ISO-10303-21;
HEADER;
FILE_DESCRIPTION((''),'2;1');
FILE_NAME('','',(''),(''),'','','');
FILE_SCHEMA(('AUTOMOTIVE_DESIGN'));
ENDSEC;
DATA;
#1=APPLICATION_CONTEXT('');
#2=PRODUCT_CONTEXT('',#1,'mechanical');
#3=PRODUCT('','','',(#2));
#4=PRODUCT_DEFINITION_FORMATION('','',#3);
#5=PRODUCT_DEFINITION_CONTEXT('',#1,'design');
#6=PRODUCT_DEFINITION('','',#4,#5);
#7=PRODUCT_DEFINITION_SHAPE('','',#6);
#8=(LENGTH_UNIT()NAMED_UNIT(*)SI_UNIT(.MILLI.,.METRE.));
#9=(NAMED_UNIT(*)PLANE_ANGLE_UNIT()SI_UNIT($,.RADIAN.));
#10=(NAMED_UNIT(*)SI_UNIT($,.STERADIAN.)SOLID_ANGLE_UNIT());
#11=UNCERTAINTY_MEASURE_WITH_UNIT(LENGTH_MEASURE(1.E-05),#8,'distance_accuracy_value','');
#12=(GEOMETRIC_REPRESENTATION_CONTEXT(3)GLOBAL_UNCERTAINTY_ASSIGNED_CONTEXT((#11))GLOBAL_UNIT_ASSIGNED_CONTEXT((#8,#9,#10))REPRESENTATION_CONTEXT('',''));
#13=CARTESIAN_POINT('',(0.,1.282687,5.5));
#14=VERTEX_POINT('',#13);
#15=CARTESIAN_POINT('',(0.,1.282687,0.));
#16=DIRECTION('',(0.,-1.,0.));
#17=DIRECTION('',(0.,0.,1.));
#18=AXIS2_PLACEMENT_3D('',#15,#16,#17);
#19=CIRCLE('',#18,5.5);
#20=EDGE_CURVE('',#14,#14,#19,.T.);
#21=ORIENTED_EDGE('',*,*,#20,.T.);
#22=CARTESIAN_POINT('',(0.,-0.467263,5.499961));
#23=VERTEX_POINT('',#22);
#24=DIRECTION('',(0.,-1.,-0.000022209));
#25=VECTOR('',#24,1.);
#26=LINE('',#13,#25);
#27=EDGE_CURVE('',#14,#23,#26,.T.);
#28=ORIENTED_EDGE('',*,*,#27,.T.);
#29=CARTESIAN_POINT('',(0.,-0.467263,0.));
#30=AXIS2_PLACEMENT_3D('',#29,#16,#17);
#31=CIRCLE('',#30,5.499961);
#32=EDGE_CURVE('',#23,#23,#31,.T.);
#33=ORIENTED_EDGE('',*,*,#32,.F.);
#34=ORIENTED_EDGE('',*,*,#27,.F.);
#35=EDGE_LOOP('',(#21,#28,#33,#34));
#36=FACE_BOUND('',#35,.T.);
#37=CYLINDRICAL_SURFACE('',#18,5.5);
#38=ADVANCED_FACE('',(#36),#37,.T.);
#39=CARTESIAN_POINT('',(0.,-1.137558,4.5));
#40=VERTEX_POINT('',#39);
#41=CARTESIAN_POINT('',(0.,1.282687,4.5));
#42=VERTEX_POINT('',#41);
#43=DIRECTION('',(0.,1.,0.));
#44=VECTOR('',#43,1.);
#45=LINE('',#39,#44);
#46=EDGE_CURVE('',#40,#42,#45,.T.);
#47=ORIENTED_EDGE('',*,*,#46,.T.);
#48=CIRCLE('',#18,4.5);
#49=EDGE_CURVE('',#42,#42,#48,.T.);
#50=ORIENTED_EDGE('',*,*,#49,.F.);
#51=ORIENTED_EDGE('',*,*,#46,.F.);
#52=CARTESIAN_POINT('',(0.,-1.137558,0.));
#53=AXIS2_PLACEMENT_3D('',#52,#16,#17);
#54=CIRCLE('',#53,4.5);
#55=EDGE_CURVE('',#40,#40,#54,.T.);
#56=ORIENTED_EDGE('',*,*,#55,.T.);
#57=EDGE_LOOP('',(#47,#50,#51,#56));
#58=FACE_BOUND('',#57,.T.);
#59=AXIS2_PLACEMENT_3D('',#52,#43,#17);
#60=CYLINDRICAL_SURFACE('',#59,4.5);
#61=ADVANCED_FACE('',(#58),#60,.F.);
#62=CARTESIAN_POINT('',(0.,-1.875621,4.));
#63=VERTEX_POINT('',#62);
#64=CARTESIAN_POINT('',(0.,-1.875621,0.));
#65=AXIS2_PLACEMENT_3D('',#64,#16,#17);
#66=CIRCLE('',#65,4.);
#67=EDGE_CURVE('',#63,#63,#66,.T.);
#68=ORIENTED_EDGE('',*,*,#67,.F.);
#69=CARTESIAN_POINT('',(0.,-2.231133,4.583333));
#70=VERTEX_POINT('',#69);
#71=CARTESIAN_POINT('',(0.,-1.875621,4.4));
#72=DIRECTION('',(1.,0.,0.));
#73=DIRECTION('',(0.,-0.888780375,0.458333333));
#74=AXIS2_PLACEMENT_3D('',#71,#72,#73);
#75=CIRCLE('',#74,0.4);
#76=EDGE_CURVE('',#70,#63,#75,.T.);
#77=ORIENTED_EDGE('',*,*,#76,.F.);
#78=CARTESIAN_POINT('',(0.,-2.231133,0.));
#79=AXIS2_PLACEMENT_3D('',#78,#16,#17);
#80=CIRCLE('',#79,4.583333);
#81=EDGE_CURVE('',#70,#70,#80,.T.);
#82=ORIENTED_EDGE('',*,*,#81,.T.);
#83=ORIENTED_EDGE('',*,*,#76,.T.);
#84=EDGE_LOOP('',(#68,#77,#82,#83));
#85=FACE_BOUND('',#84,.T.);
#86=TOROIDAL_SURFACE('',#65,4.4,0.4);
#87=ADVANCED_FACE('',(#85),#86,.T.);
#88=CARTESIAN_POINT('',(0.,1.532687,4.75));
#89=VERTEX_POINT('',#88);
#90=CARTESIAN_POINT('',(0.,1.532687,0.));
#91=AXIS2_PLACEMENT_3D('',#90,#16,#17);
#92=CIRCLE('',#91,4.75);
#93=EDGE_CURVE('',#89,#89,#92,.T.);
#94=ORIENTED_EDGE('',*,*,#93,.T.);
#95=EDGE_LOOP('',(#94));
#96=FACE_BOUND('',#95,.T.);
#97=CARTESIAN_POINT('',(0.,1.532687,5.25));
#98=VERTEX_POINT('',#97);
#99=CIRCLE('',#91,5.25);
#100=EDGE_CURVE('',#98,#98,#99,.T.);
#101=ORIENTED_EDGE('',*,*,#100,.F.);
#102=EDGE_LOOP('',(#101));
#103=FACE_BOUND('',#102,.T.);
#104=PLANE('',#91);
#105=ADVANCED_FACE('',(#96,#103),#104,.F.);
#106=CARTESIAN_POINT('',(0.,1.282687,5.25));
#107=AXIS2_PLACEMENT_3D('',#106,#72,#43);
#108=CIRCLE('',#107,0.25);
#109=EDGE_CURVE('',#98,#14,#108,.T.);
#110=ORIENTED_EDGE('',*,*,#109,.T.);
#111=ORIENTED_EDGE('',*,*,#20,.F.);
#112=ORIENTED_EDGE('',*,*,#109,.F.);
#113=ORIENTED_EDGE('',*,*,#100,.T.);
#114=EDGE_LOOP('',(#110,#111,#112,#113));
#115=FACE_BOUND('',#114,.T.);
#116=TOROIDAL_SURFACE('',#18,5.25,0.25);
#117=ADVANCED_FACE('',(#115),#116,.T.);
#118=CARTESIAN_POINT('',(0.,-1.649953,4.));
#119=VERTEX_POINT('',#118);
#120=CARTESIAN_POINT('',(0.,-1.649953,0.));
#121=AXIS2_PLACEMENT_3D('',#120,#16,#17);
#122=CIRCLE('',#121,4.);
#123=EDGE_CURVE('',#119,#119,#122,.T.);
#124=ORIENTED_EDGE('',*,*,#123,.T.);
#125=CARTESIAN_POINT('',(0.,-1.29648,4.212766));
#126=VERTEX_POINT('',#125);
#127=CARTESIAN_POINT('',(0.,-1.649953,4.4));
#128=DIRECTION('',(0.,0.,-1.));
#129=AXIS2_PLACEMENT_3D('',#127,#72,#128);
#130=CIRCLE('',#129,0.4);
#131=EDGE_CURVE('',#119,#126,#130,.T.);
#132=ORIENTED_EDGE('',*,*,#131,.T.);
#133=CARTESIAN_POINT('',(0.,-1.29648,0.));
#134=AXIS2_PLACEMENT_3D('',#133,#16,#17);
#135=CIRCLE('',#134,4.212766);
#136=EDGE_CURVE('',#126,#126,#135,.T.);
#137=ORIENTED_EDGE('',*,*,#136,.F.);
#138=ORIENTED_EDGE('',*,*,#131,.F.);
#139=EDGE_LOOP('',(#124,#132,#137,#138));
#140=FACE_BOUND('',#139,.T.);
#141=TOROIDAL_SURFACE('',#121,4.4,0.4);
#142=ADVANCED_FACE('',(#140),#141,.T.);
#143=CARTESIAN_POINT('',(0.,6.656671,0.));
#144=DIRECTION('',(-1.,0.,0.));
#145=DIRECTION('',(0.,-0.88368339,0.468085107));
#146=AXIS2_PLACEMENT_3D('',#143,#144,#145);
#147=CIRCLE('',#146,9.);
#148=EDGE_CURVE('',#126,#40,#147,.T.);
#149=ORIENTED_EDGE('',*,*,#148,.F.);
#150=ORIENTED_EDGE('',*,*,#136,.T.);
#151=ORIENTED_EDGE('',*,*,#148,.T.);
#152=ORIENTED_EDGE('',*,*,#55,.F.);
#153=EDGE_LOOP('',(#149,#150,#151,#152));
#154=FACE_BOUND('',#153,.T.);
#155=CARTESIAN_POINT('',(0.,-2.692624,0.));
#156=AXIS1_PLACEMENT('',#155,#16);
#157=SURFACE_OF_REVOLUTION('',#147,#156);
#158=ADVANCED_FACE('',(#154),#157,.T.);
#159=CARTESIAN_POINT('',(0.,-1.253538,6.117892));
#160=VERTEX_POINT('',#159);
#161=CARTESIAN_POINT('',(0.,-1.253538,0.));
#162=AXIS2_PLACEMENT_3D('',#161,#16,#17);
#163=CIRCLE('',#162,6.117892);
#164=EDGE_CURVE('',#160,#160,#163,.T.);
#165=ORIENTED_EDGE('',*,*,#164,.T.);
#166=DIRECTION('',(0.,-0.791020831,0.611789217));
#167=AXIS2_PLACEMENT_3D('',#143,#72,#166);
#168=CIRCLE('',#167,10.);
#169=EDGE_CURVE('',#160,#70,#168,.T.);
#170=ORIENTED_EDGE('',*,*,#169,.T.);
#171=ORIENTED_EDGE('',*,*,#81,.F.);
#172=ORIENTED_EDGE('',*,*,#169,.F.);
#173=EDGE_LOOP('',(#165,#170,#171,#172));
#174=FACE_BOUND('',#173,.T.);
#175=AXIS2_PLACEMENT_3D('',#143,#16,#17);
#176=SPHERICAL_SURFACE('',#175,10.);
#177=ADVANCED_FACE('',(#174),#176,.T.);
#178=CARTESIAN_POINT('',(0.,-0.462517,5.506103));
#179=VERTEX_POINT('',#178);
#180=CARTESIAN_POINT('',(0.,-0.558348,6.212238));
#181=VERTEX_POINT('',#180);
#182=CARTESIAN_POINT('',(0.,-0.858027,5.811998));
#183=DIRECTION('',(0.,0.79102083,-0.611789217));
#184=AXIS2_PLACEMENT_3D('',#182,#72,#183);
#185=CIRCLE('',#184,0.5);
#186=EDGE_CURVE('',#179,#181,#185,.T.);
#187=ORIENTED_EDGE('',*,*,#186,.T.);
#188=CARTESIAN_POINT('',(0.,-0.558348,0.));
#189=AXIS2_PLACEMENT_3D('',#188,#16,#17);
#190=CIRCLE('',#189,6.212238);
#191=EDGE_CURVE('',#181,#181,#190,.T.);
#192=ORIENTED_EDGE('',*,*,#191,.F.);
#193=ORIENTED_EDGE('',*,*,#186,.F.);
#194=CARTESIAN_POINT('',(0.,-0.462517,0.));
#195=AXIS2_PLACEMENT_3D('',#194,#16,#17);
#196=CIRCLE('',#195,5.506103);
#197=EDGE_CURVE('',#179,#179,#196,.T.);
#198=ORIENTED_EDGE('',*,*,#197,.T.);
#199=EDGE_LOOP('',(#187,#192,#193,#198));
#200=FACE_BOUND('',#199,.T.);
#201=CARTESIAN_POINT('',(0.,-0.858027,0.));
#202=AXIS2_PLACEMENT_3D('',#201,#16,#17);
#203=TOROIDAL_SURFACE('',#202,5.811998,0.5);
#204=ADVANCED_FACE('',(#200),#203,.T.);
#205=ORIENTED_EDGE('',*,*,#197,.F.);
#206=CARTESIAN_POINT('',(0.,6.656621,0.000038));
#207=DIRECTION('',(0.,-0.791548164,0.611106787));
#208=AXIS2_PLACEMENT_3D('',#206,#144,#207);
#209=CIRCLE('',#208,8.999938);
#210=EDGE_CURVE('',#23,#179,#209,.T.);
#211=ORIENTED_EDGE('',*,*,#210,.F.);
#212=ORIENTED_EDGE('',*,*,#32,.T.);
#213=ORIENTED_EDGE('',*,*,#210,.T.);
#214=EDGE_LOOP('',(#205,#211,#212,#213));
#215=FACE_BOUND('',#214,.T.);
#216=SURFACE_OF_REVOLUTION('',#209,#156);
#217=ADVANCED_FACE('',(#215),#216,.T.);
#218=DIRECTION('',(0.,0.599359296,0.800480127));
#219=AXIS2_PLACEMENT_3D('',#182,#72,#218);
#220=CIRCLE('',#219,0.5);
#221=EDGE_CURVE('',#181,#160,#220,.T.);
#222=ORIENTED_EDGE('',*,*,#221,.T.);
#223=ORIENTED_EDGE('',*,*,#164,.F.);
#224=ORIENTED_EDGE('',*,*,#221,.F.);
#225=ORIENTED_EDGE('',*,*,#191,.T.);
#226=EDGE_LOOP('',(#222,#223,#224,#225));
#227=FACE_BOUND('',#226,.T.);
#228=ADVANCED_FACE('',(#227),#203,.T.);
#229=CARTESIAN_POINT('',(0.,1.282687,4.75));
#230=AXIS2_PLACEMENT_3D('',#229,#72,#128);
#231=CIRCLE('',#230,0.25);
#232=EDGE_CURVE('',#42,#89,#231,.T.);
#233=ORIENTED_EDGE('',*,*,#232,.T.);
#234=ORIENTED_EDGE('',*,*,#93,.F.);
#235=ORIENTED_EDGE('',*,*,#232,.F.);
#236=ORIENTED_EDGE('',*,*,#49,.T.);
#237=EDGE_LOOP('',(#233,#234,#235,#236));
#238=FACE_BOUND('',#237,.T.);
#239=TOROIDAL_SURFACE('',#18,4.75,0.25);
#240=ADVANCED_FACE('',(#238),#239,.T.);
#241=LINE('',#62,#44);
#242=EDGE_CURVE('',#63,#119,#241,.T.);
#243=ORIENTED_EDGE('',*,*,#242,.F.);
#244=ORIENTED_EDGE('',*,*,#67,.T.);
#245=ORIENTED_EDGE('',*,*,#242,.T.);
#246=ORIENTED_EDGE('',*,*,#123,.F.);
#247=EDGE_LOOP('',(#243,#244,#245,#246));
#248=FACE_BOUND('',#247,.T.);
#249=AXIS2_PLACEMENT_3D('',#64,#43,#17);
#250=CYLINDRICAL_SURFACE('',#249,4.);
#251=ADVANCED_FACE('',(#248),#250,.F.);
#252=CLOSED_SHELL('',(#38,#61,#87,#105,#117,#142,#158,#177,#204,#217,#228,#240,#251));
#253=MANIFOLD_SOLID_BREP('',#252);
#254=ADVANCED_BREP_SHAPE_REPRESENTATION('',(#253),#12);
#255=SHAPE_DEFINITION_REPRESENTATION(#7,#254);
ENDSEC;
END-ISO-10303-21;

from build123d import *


# Not quite as in the source:
# - ends of sketch curves that miss each other by under 0.0002 mm in the source are joined


with BuildPart() as f1:
    # F0 (on Right) → F1 (revolve)
    with BuildSketch(Plane.YZ):
        with BuildLine():
            ThreePointArc((-2.2311331873, 4.5833333333), (-2.2171860627, 4.1918334001), (-1.8756210372, 4))
            Line((-1.8756210372, 4), (-1.6499533041, 4))
            ThreePointArc((-1.6499533041, 4), (-1.4436690548, 4.0572948666), (-1.2964799482, 4.2127659576))
            ThreePointArc((-1.2964799482, 4.2127659576), (-1.2183286985, 4.3571076069), (-1.1375580754, 4.5))
            ThreePointArc((-1.1375580754, 4.5), (-0.8191484877, 5.0112004142), (-0.4672628718, 5.4999611351))
            ThreePointArc((-0.4672628718, 5.4999611351), (-0.4648905545, 5.5030325568), (-0.462516913, 5.5061029552))
            ThreePointArc((-0.462516913, 5.5061029552), (-0.3625691061, 5.8792370625), (-0.5583476801, 6.2122376272))
            ThreePointArc((-0.558347675, 6.2122376234), (-0.925266822, 6.3074557819), (-1.2535377384, 6.1178921683))
            ThreePointArc((-1.2535377384, 6.1178921683), (-1.7773095132, 5.3728930777), (-2.2311331873, 4.5833333333))
        make_face()
        with BuildLine():
            ThreePointArc((-0.4672628718, 5.4999611351), (-0.8191484877, 5.0112004142), (-1.1375580754, 4.5))
            Line((-1.1375580754, 4.5), (1.2826867876, 4.5))
            ThreePointArc((1.2826867876, 4.5), (1.4594634829, 4.5732233047), (1.5326867876, 4.75))
            Line((1.5326867876, 4.75), (1.5326867876, 5.25))
            ThreePointArc((1.5326867876, 5.25), (1.4594634829, 5.4267766953), (1.2826867876, 5.5))
            Line((1.2826867876, 5.5), (-0.4672628718, 5.4999611351))
        make_face()
    revolve(axis=Axis((0, -2.6926244609, 0), (0, -1, 0)))


solid = f1.part
